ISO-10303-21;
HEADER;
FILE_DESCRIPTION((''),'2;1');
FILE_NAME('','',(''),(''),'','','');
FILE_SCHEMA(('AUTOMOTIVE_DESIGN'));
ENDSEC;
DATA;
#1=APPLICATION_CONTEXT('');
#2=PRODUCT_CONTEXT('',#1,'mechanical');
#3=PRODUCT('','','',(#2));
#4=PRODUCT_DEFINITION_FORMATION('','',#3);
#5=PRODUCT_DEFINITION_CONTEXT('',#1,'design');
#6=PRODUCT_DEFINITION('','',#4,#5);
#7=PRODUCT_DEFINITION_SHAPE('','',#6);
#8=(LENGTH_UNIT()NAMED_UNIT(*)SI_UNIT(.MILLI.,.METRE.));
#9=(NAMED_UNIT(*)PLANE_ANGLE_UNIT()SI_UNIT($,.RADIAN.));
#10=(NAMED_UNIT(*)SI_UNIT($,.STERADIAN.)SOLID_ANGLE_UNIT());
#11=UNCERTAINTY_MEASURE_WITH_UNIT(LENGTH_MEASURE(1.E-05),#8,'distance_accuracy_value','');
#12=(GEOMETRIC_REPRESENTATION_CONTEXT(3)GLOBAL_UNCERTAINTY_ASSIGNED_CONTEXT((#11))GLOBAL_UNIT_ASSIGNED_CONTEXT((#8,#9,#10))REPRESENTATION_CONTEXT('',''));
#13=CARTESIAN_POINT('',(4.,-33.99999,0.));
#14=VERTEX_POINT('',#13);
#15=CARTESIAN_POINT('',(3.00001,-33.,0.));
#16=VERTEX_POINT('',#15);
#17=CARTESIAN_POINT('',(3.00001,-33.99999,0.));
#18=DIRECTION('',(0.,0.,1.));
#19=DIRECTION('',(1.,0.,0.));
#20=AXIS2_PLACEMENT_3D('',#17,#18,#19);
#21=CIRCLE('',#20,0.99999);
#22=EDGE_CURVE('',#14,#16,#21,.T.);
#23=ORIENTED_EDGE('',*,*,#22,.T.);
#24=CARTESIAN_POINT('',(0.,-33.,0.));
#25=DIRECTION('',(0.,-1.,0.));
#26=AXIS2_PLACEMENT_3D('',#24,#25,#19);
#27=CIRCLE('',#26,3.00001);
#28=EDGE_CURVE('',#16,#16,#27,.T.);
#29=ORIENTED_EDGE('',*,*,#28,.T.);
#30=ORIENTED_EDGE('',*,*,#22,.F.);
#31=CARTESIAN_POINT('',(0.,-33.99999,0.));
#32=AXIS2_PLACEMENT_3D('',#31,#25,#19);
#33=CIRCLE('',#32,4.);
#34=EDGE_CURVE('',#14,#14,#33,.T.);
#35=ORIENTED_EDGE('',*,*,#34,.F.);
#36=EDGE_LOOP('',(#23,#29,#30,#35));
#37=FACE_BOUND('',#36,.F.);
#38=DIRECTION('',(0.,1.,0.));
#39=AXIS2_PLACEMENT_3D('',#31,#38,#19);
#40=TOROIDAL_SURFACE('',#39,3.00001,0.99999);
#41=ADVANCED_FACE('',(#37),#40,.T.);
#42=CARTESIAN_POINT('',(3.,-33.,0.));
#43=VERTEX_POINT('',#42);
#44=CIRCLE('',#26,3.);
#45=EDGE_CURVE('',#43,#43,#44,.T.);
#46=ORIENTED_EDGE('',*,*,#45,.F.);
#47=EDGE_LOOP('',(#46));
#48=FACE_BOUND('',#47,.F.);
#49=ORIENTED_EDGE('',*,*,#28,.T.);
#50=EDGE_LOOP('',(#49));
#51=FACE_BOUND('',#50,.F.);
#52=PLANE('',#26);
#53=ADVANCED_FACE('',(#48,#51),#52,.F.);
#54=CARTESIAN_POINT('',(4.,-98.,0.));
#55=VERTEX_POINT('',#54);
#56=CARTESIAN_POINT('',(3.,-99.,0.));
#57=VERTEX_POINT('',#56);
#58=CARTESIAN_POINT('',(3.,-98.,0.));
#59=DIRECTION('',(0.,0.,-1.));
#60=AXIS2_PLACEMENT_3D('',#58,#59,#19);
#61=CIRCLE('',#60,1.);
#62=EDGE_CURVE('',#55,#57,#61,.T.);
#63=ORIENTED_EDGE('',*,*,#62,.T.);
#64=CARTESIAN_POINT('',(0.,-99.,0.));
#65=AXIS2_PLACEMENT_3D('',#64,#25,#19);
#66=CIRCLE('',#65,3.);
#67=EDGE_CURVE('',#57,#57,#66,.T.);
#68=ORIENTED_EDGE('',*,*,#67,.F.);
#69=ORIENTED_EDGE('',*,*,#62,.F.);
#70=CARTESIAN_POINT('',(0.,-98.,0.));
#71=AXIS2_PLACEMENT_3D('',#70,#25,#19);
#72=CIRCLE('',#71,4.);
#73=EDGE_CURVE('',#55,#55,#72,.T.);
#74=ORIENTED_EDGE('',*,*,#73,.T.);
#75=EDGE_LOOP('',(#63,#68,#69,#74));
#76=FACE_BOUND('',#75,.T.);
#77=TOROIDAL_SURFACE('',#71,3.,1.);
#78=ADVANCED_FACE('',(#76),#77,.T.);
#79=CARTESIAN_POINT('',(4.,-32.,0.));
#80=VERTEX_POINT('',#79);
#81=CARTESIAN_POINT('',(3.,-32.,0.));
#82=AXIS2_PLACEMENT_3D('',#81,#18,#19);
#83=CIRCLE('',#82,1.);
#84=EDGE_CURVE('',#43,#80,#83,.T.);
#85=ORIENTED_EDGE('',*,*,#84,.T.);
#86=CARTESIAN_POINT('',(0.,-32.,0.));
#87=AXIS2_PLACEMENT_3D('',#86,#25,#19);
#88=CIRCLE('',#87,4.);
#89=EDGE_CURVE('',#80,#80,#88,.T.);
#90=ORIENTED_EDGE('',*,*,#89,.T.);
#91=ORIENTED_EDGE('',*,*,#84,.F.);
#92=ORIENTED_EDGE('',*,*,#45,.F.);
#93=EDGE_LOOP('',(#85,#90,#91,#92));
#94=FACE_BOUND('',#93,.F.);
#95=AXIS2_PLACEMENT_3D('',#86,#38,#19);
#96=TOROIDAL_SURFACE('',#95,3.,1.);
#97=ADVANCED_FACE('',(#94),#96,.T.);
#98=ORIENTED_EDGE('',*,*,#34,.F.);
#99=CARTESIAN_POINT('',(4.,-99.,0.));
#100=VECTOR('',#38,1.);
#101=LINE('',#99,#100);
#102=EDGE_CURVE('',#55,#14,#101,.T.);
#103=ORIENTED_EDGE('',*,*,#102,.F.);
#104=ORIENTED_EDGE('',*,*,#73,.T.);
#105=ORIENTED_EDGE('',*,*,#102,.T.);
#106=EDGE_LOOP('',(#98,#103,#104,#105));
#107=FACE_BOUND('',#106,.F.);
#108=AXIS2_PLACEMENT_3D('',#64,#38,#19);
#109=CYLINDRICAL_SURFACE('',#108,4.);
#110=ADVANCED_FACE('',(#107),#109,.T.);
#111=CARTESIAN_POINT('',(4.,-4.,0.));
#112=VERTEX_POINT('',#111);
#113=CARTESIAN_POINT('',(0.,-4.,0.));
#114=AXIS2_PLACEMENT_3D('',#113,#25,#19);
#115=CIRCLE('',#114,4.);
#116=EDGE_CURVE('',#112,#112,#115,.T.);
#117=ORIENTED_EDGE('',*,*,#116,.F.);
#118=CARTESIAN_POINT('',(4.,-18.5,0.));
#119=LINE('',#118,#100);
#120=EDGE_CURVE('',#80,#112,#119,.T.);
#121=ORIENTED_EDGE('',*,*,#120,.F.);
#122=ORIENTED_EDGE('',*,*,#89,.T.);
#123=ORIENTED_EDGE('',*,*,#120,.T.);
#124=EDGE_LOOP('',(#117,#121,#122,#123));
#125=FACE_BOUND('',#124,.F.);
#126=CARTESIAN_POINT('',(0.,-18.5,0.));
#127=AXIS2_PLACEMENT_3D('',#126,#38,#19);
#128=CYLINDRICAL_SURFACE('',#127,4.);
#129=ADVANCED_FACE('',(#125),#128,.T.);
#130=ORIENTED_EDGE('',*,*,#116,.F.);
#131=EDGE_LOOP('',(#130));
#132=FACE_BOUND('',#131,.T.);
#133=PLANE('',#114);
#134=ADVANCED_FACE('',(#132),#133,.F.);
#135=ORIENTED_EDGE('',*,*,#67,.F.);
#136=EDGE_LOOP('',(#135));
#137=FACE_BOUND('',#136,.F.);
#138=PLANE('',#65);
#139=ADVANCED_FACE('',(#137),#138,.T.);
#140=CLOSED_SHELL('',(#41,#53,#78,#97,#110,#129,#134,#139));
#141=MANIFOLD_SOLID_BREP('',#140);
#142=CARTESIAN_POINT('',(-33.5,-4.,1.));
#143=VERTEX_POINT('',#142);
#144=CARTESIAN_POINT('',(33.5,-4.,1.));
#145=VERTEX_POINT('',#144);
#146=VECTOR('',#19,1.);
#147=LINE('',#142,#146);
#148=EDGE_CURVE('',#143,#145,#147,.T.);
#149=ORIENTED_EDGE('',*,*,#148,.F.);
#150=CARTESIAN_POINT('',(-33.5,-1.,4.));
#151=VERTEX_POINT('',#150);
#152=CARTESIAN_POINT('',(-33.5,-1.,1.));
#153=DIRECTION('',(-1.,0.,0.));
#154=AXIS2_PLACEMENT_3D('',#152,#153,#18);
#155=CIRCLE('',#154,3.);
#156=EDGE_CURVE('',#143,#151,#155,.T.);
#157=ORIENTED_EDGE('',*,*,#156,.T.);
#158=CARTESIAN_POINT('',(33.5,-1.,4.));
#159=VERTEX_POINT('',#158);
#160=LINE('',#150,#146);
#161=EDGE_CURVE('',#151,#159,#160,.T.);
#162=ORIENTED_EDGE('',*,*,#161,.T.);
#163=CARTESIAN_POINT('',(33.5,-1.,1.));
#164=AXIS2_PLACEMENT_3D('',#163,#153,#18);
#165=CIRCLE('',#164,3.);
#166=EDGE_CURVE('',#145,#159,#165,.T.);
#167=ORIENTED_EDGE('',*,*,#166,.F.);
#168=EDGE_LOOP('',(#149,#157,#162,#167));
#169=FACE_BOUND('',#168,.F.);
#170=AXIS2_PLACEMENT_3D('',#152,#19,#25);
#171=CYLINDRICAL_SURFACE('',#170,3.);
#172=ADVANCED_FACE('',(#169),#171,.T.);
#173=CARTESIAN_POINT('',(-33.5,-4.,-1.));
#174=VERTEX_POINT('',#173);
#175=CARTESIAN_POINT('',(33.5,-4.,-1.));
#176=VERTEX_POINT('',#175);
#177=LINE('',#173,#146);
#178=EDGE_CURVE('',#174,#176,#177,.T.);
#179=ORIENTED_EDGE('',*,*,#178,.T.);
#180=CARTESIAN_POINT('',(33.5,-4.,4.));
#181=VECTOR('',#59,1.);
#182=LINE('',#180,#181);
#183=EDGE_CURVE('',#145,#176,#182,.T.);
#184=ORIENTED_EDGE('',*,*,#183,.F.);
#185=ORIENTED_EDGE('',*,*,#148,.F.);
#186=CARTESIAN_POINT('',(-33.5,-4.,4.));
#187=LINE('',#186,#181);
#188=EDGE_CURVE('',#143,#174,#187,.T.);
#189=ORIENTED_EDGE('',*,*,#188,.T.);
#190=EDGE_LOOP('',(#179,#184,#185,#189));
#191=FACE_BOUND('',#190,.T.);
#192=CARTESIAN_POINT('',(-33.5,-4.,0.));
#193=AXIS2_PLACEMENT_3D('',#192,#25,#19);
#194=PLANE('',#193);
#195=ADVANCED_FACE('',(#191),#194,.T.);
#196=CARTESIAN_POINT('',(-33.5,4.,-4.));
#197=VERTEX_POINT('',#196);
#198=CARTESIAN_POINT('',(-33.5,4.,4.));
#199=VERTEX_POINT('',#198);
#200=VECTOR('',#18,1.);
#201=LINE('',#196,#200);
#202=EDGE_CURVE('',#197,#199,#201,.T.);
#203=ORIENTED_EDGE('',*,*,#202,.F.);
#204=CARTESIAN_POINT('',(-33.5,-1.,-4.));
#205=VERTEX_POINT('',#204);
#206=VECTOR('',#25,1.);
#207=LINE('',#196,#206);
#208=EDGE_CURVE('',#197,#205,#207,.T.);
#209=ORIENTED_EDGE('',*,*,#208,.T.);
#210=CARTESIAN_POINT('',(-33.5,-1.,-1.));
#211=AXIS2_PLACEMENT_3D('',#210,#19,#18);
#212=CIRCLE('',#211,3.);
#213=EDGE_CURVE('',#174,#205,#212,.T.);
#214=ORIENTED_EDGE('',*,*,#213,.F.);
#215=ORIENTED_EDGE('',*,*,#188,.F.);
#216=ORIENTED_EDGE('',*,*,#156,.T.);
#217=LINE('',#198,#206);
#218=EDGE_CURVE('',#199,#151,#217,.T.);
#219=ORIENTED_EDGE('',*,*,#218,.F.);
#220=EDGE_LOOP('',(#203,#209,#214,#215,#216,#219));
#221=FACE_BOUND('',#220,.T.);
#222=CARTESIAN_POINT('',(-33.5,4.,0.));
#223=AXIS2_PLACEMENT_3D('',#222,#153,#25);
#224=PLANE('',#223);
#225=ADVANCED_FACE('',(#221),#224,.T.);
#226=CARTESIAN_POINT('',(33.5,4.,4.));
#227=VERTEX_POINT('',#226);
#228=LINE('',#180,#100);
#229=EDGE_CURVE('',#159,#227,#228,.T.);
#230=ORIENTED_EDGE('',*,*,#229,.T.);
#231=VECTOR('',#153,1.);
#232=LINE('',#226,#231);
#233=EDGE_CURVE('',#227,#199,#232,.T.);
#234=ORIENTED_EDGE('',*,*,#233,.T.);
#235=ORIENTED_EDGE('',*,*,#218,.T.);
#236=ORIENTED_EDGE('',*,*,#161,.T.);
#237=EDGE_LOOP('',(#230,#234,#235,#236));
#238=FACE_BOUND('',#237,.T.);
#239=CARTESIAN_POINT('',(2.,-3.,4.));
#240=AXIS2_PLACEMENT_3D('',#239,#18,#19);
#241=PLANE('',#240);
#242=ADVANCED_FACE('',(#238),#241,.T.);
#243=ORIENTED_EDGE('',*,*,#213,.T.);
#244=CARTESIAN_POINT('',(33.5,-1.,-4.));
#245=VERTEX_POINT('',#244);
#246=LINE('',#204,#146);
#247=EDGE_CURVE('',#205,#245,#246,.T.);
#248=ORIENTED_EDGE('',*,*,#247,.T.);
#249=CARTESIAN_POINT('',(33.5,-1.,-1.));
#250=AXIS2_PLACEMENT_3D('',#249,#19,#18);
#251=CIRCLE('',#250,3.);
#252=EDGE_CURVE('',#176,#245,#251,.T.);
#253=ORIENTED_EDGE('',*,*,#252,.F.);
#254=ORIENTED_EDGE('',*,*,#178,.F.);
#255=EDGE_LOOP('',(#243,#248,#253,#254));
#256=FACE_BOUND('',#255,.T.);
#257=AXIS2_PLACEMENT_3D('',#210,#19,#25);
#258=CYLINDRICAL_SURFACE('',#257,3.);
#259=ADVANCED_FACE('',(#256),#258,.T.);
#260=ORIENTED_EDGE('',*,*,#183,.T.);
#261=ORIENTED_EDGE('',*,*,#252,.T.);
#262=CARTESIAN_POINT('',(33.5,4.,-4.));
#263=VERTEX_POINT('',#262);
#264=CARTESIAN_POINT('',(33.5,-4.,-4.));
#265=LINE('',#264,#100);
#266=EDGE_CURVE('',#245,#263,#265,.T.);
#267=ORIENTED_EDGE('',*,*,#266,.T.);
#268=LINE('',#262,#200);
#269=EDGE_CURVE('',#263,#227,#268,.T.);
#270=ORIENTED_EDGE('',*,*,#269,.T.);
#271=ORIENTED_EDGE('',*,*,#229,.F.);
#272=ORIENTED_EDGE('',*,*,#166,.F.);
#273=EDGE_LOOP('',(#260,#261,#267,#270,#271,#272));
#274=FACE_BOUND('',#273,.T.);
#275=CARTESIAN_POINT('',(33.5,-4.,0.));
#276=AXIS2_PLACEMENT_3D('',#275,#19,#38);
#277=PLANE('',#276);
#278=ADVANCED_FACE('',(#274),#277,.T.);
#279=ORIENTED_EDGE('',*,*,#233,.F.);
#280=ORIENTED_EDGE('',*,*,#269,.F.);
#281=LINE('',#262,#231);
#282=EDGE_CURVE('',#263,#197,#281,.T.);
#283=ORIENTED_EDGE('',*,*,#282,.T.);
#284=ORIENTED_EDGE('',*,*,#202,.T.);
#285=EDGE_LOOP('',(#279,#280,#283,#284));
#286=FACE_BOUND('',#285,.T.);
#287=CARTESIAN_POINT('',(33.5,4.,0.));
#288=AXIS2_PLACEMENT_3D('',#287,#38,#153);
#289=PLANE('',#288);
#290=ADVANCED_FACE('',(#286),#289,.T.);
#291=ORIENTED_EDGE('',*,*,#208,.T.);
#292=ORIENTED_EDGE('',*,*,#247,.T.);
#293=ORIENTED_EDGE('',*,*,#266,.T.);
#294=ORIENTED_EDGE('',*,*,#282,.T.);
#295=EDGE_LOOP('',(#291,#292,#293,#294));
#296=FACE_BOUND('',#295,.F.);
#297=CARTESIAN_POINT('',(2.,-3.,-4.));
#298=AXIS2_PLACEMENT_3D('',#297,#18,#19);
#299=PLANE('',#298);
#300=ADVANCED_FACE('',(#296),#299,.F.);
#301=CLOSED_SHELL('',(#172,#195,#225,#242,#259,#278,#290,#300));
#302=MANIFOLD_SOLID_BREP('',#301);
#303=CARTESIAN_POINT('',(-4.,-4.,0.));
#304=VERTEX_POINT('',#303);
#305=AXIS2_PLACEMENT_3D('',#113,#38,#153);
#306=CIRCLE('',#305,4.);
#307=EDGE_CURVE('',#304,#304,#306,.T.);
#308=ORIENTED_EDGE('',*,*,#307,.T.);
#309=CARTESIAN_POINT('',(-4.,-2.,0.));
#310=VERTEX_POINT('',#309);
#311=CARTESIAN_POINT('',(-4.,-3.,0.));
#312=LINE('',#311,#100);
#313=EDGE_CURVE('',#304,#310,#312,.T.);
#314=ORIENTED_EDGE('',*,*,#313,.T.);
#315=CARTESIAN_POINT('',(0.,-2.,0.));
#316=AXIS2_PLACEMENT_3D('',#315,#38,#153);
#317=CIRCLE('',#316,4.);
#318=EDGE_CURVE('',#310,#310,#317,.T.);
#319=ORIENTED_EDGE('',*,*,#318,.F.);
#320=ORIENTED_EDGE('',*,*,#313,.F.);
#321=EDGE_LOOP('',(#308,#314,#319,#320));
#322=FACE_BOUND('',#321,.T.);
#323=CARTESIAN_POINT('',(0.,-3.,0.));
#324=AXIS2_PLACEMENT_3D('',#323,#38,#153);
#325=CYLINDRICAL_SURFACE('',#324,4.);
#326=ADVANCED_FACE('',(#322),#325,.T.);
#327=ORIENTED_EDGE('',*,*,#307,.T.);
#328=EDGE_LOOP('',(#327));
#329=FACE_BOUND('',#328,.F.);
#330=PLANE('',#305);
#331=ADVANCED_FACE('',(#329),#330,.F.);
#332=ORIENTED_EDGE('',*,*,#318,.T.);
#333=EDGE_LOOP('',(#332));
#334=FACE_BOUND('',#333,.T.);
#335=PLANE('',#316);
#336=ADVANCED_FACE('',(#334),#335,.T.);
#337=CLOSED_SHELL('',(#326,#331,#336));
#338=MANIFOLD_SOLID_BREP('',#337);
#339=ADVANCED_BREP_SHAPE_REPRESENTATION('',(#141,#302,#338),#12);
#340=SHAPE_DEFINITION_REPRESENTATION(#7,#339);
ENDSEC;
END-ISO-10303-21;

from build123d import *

# Parameters (mm, degrees)
F0_W     = 4
F0_H     = 29
F2_R     = 1
F0_H_2   = 2
F0_H_3   = 6
F3_DEPTH = 4
F5_R     = 0.99999
F6_R     = 1
F7_R     = 3


# Not quite as in the source:
# - a fillet or chamfer is up to 0.001 mm smaller than in the source, because OpenCascade refuses the exact size


with BuildPart() as f1:
    # F0 (on Top) → F1 (revolve)
    with BuildSketch(Plane.XY):
        with Locations((2, -18.5)):
            Rectangle(F0_W, F0_H)
    revolve(axis=Axis((0, -27.75, 0), (0, -1, 0)))

    # F2
    f2_edges = [f1.edges().sort_by_distance(p)[0] for p in [
        (-4, -33, 0),
    ]]
    fillet(f2_edges, radius=F2_R)

    # F0 (on Top) → F4 (revolve)
    with BuildSketch(Plane.XY):
        Polygon((4, -99), (4, -33), (0, -33), (0, -51.5), (0, -99), align=None)
    revolve(axis=Axis((0, -75.25, 0), (0, -1, 0)))

    # F5 (radius 1 in the source; OpenCascade refuses exactly that, so slightly less here)
    f5_edges = [f1.edges().sort_by_distance(p)[0] for p in [
        (-4, -33, 0),
    ]]
    fillet(f5_edges, radius=F5_R)

    # F6
    f6_edges = [f1.edges().sort_by_distance(p)[0] for p in [
        (-4, -99, 0),
    ]]
    fillet(f6_edges, radius=F6_R)


with BuildPart() as f3:
    # F0 (on Top) → F3 (new body, symmetric)
    with BuildSketch(Plane.XY):
        with Locations((2, -3)):
            Rectangle(F0_W, F0_H_2)
        with Locations((2, 1)):
            Rectangle(F0_W, F0_H_3)
        with Locations((-2, 1)):
            Rectangle(F0_W, F0_H_3)
        with Locations((-2, -3)):
            Rectangle(F0_W, F0_H_2)
        Polygon((33.5, -4), (33.5, 4), (4, 4), (4, -2), (4, -4), align=None)
        Polygon((-4, -2), (-4, 4), (-33.5, 4), (-33.5, -4), (-4, -4), align=None)
    extrude(amount=F3_DEPTH, both=True)

    # F7
    f7_edges = [f3.edges().sort_by_distance(p)[0] for p in [
        (0, -4, -4),
        (0, -4, 4),
    ]]
    fillet(f7_edges, radius=F7_R)


with BuildPart() as f8:
    # F0 (on Top) → F8 (revolve)
    with BuildSketch(Plane.XY):
        with Locations((-2, -3)):
            Rectangle(F0_W, F0_H_2)
    revolve(axis=Axis((0, 0, 0), (0, 1, 0)))


solid = Compound([f1.part, f3.part, f8.part])
